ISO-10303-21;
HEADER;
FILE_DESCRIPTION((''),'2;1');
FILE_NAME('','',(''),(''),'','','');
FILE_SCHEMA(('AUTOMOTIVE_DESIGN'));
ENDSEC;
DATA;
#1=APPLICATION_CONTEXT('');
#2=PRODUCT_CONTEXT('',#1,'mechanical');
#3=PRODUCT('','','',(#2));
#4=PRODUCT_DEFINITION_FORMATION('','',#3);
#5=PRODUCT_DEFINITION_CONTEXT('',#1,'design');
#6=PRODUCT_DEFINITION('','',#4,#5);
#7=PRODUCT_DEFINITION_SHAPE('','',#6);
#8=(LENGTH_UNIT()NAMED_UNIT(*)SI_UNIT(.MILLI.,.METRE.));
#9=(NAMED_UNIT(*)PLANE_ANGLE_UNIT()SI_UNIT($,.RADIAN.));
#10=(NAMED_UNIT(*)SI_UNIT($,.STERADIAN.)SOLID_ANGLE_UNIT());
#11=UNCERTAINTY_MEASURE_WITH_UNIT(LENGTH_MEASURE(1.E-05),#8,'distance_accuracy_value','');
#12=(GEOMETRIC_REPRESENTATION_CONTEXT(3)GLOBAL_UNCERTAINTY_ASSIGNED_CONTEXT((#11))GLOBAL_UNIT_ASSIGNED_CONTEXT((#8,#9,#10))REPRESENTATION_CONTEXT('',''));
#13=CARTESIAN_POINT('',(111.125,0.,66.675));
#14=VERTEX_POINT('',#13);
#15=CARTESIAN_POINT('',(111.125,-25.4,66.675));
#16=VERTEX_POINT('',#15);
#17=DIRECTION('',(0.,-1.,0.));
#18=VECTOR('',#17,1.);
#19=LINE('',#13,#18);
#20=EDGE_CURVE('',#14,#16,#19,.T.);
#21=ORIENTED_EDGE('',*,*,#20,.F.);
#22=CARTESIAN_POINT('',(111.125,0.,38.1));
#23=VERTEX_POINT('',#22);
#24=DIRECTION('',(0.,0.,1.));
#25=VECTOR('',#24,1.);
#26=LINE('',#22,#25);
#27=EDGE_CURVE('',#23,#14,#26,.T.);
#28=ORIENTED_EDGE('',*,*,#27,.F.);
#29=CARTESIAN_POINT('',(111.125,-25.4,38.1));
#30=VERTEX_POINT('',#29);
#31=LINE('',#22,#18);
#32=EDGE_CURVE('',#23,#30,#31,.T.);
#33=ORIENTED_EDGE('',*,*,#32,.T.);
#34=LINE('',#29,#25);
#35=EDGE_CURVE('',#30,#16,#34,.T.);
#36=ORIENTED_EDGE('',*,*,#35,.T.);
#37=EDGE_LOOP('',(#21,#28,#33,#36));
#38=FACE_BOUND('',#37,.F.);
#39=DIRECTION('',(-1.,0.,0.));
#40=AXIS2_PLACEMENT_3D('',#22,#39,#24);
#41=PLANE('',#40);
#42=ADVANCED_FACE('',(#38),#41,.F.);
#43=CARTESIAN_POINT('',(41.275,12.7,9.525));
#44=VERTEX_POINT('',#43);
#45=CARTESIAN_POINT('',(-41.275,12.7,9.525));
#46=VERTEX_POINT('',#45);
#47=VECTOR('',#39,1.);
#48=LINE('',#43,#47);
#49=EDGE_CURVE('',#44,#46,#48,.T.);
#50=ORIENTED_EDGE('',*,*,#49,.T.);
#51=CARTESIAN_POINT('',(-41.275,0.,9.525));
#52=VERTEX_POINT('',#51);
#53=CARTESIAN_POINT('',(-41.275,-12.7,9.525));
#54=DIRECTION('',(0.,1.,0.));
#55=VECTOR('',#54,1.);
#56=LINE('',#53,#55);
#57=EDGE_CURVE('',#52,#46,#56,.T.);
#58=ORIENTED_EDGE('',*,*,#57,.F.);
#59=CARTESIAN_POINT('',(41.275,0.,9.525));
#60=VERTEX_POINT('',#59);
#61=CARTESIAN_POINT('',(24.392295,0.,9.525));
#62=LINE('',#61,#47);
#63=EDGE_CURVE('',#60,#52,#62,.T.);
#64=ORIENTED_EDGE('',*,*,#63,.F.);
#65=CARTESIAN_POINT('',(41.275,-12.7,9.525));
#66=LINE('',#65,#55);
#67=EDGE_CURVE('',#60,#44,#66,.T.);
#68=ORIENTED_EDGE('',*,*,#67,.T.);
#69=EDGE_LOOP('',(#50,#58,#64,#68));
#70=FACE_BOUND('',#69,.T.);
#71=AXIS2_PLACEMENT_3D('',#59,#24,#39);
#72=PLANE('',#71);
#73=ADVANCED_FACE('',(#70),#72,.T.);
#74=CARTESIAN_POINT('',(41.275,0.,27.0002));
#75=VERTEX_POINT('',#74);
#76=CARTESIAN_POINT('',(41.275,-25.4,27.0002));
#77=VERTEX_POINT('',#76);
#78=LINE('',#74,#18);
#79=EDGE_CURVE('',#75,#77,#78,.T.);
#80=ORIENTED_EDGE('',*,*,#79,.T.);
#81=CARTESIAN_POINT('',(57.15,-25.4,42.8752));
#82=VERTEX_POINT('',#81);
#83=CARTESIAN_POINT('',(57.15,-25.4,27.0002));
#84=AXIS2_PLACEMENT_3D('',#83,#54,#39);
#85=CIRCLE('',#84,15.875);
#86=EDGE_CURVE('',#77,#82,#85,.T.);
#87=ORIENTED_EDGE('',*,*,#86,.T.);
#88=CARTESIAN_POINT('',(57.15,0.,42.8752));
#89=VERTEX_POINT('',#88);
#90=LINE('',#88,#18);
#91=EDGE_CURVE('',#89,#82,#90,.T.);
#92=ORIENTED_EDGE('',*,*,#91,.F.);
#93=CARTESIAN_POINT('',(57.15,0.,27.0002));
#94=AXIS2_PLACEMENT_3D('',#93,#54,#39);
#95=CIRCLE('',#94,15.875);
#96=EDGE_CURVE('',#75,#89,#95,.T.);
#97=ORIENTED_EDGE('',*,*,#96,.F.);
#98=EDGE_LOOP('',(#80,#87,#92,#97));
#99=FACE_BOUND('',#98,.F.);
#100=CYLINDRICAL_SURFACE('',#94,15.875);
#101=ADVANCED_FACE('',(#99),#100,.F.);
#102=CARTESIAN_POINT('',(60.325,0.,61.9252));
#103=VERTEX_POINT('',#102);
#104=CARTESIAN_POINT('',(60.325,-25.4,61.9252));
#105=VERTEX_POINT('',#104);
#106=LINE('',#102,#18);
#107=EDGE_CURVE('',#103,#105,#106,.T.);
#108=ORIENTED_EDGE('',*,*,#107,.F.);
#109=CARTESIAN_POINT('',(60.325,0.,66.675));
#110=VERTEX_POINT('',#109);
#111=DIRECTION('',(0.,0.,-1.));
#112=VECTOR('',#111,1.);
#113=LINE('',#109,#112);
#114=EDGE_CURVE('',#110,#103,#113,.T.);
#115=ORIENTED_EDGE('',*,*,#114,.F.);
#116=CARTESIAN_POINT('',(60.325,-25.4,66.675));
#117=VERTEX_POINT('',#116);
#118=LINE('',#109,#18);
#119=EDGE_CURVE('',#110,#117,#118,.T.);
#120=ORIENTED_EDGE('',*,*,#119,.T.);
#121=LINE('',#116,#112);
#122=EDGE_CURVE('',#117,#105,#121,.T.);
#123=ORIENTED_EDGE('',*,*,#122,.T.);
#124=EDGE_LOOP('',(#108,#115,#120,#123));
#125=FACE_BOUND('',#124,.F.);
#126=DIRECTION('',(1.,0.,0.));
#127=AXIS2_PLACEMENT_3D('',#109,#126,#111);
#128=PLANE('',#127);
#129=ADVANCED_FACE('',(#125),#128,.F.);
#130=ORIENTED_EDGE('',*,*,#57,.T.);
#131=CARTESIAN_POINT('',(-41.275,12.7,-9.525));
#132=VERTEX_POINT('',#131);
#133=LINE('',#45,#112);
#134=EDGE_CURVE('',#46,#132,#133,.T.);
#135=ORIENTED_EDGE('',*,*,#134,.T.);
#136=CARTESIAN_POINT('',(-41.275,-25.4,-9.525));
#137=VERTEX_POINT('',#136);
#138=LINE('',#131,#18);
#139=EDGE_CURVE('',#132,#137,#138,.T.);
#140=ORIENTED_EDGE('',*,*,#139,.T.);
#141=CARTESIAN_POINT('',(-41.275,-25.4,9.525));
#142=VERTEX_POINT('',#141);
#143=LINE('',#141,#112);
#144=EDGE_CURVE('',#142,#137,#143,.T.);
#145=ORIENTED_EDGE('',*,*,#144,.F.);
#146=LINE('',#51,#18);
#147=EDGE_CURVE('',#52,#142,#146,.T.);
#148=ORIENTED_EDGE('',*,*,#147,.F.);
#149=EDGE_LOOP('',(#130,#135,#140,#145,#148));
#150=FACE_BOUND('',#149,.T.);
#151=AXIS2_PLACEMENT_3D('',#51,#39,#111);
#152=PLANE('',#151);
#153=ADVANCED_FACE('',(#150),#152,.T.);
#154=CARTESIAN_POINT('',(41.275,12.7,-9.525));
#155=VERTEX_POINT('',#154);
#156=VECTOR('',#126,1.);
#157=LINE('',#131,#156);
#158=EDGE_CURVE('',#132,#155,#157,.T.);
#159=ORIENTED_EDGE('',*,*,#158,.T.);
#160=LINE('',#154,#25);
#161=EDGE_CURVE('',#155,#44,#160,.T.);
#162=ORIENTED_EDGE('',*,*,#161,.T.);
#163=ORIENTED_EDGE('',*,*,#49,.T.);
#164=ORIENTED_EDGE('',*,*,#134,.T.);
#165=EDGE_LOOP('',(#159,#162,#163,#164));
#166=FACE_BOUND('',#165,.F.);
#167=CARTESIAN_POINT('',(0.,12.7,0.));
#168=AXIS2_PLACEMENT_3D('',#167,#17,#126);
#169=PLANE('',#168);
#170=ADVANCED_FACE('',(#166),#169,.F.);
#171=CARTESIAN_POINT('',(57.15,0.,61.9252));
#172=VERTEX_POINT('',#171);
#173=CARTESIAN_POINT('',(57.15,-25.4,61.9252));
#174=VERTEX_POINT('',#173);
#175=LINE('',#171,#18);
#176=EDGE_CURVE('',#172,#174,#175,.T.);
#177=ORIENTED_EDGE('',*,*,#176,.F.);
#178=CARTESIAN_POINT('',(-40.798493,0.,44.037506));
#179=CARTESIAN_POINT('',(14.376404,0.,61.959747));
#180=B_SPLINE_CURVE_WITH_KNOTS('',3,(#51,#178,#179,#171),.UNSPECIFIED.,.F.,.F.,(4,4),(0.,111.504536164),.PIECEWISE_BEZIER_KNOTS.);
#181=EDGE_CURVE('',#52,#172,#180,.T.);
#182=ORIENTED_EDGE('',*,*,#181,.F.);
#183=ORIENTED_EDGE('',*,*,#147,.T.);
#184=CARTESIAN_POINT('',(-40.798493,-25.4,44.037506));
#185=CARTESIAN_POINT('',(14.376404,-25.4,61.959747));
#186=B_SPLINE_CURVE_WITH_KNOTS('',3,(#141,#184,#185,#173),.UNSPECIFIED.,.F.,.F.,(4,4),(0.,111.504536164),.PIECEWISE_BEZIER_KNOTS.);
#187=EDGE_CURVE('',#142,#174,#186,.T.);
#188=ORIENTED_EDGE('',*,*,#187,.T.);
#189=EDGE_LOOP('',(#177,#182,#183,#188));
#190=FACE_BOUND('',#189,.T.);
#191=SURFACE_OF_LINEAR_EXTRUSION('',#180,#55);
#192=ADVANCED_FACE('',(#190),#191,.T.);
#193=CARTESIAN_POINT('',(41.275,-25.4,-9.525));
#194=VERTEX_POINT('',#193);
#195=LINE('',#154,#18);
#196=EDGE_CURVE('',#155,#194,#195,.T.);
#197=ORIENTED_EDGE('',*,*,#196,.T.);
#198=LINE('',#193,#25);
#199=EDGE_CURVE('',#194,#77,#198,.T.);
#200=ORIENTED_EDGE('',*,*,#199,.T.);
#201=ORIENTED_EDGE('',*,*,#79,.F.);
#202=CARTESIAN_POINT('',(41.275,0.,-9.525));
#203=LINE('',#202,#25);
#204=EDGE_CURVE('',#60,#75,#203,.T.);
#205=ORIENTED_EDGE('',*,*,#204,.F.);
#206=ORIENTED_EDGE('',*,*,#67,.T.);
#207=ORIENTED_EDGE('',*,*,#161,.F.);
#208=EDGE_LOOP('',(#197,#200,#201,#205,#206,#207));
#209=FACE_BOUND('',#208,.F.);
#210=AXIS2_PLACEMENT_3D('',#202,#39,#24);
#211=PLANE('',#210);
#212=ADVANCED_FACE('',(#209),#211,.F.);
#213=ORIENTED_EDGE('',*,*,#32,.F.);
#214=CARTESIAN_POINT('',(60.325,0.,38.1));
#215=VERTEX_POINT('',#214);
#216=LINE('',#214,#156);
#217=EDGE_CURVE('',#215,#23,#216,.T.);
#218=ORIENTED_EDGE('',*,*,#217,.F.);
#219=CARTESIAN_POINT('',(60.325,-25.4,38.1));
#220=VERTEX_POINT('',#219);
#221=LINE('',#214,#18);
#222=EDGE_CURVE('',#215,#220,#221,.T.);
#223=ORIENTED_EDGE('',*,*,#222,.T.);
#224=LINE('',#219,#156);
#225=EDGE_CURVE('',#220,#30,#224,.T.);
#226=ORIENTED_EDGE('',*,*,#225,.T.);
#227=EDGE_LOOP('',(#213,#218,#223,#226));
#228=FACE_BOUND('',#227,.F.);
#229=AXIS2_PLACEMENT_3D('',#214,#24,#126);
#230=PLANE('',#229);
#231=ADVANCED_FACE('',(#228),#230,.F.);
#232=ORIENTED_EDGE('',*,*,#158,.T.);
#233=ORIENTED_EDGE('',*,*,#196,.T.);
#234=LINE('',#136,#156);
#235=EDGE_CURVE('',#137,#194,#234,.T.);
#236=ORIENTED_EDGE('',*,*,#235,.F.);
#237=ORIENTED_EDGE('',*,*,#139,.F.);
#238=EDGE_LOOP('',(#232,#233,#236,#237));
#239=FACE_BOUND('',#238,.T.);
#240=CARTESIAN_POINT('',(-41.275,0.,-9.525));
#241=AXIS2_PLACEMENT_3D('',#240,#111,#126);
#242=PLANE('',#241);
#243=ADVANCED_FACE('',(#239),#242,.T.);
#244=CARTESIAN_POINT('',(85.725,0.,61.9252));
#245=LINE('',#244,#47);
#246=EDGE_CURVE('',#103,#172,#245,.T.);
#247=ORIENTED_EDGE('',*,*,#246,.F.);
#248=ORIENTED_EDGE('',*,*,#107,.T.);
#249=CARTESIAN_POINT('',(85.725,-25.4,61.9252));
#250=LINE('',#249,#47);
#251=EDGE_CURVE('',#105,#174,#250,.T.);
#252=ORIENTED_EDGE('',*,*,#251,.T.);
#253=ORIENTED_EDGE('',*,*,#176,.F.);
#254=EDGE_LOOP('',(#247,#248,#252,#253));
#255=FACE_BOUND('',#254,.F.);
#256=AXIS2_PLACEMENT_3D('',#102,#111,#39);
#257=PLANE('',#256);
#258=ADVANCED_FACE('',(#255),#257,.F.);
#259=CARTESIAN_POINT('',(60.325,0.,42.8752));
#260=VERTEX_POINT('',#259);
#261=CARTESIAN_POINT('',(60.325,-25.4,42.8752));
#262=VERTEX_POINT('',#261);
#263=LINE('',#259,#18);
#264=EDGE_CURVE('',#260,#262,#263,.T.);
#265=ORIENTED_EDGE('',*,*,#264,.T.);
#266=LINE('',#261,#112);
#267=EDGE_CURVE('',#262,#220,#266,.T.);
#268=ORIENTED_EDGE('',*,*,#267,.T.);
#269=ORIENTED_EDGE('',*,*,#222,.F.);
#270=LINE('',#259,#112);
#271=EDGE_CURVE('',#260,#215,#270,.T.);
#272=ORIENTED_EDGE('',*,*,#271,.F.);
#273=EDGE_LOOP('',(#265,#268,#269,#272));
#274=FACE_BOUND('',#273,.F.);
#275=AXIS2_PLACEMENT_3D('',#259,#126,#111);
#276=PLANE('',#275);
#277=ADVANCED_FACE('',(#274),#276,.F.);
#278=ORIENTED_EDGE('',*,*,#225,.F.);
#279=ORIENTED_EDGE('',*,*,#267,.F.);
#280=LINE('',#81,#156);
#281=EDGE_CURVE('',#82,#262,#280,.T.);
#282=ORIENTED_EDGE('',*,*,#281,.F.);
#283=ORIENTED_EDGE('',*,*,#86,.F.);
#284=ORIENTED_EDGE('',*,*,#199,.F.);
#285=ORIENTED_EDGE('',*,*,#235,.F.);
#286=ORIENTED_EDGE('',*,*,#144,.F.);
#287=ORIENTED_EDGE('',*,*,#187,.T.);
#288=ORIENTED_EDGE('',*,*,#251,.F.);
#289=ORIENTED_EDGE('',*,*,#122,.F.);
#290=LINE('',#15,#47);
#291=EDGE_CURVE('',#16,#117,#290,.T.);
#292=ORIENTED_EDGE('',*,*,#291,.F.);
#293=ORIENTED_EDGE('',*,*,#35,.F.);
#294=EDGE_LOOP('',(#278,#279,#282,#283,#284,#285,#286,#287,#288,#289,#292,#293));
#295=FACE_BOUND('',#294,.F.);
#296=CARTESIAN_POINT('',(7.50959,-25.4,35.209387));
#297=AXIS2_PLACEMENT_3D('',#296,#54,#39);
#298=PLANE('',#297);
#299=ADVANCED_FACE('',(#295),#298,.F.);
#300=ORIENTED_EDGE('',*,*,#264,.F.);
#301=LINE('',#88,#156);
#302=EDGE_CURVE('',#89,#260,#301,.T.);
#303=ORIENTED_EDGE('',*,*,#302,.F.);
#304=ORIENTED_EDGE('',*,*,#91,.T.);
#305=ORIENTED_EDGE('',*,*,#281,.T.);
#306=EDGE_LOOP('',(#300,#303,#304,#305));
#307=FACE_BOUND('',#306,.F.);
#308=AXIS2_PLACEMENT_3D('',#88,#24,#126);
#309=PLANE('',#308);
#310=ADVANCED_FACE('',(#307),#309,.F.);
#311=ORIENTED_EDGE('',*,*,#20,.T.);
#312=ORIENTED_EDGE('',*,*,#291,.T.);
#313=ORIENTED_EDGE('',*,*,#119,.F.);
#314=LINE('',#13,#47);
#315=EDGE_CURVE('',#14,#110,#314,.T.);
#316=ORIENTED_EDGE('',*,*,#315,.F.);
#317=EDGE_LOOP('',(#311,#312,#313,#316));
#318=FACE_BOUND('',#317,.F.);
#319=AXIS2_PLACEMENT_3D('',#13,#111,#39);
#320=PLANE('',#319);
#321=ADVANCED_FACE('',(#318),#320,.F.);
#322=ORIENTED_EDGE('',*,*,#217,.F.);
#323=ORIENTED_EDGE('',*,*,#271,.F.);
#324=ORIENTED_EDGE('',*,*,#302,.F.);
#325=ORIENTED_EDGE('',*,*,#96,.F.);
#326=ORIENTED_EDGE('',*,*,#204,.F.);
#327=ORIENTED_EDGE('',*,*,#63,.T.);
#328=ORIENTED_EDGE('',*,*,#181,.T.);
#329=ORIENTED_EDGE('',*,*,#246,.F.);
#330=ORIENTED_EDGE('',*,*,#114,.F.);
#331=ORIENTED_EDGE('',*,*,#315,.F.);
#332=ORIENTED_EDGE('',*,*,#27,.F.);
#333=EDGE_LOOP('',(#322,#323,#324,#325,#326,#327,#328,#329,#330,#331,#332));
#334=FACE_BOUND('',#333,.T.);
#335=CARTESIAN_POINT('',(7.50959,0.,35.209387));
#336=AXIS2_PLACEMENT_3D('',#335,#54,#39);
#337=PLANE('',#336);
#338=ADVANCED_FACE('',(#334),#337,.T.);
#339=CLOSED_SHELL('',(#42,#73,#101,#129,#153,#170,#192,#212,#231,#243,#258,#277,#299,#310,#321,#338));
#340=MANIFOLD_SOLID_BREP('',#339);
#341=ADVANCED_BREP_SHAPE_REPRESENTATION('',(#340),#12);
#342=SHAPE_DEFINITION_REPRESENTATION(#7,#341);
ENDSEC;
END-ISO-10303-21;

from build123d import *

# Parameters (mm, degrees)
F2_DEPTH = 12.7
F3_DEPTH = 25.4


# Not quite as in the source:
# - a feature names something its author has since deleted; it is built from what else it names


with BuildPart() as f2:
    # F0 (on Front) → F2 (new body, symmetric)
    with BuildSketch(Plane.XZ):
        Polygon((22.225, 9.525), (-41.275, 9.525), (-41.275, -9.525), (41.275, -9.525), (41.275, 9.525), align=None)
    extrude(amount=F2_DEPTH, both=True)

    # F0 (on Front) → F3 (join)
    with BuildSketch(Plane.XZ):
        with BuildLine():
            add(Edge.make_bspline(
                [(-41.275, 9.525), (-40.7984927297, 44.0375059843), (14.3764037639, 61.959747225), (57.15, 61.9252)],
                knots=[0, 0, 0, 0, 111.5045361635, 111.5045361635, 111.5045361635, 111.5045361635], degree=3))
            Line((-41.275, 9.525), (22.225, 9.525))
            Line((22.225, 9.525), (22.225, 27.0002))
            ThreePointArc((22.225, 27.0002), (32.4542956671, 51.6959043329), (57.15, 61.9252))
        make_face()
        Polygon((22.225, 9.525), (-41.275, 9.525), (-41.275, -9.525), (41.275, -9.525), (41.275, 9.525), align=None)
        with BuildLine():
            Line((22.225, 27.0002), (22.225, 9.525))
            Line((22.225, 9.525), (41.275, 9.525))
            Line((41.275, 9.525), (41.275, 27.0002))
            ThreePointArc((41.275, 27.0002), (45.9246798487, 38.2255201513), (57.15, 42.8752))
            Line((57.15, 42.8752), (60.325, 42.8752))
            Line((60.325, 42.8752), (60.325, 61.9252))
            Line((60.325, 61.9252), (57.15, 61.9252))
            ThreePointArc((57.15, 61.9252), (32.4542956671, 51.6959043329), (22.225, 27.0002))
        make_face()
        Polygon((74.2425137572, 61.9252), (60.325, 61.9252), (60.325, 42.8752), (74.2425137572, 42.8752), (85.725, 42.8752), (85.725, 61.9252), align=None)
        Polygon((60.325, 66.675), (60.325, 61.9252), (74.2425137572, 61.9252), (85.725, 61.9252), (85.725, 66.675), align=None)
        Polygon((74.2425137572, 42.8752), (60.325, 42.8752), (60.325, 38.1), (85.725, 38.1), (85.725, 42.8752), align=None)
        Polygon((111.125, 66.675), (85.725, 66.675), (85.725, 61.9252), (85.725, 42.8752), (85.725, 38.1), (111.125, 38.1), align=None)
    extrude(amount=F3_DEPTH)


solid = f2.part
